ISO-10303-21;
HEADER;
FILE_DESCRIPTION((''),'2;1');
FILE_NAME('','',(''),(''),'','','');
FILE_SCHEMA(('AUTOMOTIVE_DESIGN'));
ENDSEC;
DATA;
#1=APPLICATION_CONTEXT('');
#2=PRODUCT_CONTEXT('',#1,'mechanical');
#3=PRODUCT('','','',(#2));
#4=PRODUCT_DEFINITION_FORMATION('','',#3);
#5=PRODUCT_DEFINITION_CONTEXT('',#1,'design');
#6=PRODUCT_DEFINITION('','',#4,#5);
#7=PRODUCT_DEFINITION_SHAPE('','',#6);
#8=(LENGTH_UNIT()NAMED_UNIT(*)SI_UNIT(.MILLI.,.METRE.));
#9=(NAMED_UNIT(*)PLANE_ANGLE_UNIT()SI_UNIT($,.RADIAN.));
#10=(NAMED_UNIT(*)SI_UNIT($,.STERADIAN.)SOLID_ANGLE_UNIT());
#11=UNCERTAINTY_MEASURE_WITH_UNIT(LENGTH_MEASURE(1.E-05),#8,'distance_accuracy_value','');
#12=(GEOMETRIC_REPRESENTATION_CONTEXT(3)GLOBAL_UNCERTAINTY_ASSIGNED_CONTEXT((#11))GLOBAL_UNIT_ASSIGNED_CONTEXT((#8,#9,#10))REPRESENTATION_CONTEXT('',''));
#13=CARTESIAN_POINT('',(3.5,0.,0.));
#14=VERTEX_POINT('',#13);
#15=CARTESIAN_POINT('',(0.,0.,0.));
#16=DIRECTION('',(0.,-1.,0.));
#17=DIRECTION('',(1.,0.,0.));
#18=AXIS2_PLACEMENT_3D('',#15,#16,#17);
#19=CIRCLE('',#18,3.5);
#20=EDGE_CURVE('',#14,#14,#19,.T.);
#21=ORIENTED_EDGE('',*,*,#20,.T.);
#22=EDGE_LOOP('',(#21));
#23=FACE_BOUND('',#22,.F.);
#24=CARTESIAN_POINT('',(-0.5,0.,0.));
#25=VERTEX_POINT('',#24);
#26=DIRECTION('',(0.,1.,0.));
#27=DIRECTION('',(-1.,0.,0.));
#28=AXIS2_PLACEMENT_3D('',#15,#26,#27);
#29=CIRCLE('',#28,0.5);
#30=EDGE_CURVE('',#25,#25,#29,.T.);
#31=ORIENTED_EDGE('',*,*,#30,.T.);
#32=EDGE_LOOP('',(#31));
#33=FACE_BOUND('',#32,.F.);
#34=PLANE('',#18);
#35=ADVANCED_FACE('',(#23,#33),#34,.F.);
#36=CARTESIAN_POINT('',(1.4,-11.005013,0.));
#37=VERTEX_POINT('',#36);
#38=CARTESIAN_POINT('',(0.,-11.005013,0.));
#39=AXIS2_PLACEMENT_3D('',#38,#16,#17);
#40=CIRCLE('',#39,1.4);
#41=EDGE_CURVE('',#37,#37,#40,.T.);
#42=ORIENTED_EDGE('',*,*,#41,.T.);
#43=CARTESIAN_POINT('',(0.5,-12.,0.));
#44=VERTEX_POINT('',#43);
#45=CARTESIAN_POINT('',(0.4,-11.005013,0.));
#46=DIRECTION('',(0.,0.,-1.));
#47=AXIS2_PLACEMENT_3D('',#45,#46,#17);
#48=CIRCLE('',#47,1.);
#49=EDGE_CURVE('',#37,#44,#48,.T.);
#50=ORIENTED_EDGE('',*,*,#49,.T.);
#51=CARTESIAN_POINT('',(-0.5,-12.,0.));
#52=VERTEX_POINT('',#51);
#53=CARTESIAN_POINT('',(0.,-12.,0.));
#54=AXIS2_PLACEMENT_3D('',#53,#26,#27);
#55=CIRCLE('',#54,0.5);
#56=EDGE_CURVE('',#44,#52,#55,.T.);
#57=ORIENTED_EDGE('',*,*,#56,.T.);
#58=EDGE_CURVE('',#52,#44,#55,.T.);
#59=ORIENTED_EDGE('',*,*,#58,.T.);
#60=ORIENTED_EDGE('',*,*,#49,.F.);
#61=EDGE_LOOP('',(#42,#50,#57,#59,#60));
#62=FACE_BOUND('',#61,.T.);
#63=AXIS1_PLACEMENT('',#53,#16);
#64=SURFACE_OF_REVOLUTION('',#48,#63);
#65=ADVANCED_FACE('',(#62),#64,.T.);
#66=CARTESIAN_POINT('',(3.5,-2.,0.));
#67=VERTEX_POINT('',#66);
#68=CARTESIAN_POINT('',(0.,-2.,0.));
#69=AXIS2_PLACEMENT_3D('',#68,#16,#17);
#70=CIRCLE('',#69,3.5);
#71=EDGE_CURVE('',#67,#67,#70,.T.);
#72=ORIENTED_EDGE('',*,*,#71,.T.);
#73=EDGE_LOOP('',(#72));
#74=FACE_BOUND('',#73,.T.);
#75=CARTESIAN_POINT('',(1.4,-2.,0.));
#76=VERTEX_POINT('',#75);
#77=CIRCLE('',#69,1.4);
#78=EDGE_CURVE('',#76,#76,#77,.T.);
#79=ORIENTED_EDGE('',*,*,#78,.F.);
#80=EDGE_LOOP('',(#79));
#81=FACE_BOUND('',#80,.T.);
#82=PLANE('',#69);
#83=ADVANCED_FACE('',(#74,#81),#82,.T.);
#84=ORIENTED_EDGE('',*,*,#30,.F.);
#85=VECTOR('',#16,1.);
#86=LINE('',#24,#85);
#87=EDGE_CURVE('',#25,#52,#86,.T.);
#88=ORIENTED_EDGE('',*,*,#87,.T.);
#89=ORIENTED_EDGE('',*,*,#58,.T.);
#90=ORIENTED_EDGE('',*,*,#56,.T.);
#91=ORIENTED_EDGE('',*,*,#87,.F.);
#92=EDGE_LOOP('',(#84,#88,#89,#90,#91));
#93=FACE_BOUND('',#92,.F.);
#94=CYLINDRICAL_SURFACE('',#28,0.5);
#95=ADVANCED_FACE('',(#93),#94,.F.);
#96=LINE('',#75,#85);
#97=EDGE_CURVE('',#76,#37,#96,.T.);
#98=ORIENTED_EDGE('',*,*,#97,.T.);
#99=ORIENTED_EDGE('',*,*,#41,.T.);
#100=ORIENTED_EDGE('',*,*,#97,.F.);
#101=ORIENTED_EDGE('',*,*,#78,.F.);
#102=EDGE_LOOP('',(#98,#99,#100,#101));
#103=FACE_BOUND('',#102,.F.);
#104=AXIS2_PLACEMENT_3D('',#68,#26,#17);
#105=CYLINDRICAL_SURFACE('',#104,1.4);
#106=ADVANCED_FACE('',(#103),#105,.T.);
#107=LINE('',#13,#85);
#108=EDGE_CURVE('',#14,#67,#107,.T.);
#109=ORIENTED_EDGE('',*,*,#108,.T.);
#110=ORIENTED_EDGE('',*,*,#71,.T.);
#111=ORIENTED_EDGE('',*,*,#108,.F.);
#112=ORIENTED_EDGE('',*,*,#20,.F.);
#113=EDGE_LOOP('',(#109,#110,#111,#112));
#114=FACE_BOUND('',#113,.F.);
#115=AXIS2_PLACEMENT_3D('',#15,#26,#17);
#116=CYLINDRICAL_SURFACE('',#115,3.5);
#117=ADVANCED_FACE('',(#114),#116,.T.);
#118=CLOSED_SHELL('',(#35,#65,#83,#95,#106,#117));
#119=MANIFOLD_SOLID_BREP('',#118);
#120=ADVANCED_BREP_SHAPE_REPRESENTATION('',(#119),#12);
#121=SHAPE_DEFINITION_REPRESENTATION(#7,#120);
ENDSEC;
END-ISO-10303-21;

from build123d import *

# Parameters (mm, degrees)
F0_R     = 3.5
F1_DEPTH = 2
F2_R     = 1.4
F3_DEPTH = 10
F4_R     = 0.5
F5_DEPTH = 12.001


# Not quite as in the source:
# - a fillet or chamfer that OpenCascade refuses, or shapes differently, is made with other operations: its cross-section is extruded or revolved along the edge and cut away or added


with BuildPart() as f1:
    # F0 (on Front) → F1 (new body)
    with BuildSketch(Plane.XZ):
        Circle(F0_R)
    extrude(amount=F1_DEPTH)

    # F2 (on face) → F3 (join)
    with BuildSketch(Plane.XZ.offset(2)):
        Circle(F2_R)
    extrude(amount=F3_DEPTH)

    # F4 (on face) → F5 (cut, through all)
    with BuildSketch(Plane(origin=(0, 0, 0), x_dir=(-1, 0, 0), z_dir=(0, 1, 0))):
        Circle(F4_R)
    extrude(amount=-F5_DEPTH, mode=Mode.SUBTRACT)

    # F6: fillet of radius 1 on 1 edges, made by hand

    # F6_s1 → F6_t2 (revolve, cut)
    with BuildSketch(Plane.XY):
        with BuildLine():
            ThreePointArc((1.4, -11.0050125629), (1.1416198487, -11.6758329561), (0.5, -12))
            Line((0.5, -12), (1.4, -12))
            Line((1.4, -12), (1.4, -11.0050125629))
        make_face()
    revolve(axis=Axis((0, -12, 0), (0, -1, 0)), mode=Mode.SUBTRACT)


solid = f1.part
